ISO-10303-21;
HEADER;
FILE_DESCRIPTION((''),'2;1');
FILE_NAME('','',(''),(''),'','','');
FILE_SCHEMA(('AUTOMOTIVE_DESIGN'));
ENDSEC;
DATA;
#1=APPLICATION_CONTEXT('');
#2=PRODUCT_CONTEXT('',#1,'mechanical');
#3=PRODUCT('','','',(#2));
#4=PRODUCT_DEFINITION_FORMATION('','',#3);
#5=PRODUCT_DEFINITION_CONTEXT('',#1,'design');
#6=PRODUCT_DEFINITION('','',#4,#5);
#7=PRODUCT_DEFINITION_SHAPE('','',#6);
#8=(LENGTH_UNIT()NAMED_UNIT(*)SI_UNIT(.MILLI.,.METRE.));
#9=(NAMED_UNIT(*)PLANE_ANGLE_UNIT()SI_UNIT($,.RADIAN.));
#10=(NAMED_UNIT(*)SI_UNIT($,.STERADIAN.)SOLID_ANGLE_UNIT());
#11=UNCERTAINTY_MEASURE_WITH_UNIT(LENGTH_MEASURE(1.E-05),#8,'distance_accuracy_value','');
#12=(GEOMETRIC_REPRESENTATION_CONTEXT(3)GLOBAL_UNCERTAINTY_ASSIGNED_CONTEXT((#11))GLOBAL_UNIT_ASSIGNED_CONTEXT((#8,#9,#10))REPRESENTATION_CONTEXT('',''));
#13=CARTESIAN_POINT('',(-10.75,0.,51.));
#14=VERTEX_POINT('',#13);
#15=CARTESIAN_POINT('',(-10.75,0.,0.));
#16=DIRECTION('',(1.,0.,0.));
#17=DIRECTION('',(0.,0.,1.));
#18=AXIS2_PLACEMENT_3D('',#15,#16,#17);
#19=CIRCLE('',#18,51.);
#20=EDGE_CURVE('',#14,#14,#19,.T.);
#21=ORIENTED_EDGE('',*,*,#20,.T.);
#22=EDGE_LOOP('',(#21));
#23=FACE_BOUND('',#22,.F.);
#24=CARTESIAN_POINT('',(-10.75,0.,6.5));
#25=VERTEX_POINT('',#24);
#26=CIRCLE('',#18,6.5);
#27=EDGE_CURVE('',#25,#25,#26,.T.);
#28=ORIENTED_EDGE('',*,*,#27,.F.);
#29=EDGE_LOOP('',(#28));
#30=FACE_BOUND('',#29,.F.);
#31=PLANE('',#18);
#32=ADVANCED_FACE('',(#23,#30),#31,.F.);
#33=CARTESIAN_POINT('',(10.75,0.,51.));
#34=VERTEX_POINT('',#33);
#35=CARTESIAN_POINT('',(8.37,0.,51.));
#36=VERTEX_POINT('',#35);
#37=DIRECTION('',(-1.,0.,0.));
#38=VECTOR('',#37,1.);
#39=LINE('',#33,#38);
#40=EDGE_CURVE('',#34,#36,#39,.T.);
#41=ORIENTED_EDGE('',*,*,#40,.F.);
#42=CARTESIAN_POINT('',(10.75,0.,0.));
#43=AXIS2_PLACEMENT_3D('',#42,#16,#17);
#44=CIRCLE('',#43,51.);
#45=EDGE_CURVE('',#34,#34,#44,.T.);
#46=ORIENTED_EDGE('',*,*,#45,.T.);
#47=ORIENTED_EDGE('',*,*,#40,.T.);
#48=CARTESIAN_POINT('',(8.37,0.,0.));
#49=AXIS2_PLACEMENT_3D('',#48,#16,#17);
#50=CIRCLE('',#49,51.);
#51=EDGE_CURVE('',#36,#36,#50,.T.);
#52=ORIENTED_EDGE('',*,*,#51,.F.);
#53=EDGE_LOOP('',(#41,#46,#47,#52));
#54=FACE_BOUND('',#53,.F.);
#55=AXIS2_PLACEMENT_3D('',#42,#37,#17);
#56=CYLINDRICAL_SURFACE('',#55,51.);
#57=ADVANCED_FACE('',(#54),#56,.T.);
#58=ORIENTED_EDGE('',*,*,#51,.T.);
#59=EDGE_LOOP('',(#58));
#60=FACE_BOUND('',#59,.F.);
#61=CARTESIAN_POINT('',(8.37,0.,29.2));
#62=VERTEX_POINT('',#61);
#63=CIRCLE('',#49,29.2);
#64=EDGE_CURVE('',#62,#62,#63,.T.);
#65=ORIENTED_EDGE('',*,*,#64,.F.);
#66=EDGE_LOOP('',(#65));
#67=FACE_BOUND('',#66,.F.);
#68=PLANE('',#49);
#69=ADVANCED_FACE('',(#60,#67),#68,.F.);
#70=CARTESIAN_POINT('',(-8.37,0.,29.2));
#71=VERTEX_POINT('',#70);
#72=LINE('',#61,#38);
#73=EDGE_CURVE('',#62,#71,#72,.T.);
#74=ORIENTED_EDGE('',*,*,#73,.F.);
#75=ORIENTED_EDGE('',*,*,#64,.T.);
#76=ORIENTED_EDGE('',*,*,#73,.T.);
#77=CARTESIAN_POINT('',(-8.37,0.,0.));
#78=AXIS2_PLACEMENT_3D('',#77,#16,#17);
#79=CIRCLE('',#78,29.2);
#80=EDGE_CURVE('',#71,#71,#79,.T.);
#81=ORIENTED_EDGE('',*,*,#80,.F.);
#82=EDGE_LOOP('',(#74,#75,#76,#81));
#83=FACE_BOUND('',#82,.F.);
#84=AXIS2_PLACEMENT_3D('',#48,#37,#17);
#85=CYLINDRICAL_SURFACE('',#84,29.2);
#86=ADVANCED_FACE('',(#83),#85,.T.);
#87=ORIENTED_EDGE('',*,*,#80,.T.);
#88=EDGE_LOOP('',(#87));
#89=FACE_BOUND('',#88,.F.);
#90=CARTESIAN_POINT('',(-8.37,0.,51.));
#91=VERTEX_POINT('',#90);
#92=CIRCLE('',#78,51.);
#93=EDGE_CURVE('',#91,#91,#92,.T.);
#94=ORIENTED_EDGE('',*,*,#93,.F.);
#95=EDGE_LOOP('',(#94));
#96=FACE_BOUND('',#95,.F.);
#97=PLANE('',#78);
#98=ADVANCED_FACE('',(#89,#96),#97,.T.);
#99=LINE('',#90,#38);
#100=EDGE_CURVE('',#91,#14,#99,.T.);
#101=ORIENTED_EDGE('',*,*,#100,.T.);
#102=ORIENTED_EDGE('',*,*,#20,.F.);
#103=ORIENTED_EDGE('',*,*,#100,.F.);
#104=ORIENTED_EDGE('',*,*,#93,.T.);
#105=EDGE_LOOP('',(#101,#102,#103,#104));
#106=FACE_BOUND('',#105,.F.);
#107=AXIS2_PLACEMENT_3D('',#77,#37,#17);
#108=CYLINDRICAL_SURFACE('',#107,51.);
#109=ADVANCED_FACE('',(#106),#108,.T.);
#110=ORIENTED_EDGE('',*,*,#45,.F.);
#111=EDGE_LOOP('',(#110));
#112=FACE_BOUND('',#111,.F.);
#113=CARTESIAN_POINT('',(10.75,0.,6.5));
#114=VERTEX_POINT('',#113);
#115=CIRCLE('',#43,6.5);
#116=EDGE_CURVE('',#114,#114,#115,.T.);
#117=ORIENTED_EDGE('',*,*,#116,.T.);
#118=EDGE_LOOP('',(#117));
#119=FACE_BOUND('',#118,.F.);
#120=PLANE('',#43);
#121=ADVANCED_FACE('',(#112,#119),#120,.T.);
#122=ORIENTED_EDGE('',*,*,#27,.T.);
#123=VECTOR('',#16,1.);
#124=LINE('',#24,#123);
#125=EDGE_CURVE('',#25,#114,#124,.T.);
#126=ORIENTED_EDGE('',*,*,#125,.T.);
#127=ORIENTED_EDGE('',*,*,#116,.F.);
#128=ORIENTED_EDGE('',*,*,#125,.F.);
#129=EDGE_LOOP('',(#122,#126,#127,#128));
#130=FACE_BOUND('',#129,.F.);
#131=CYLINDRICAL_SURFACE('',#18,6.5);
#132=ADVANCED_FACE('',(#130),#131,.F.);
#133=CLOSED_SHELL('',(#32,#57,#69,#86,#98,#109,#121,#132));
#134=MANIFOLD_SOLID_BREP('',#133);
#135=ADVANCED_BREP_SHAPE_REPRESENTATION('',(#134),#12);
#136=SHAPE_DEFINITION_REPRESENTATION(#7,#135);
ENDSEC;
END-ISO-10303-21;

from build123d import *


# Not quite as in the source:
# - the program builds the solid bodies; features that only make, move or delete a surface that nothing else refers to are left out


with BuildPart() as f1:
    # F0 (on Front) → F1 (revolve)
    with BuildSketch(Plane.XZ):
        Polygon((-10.75, 51), (-10.75, 6.5), (0, 6.5), (10.75, 6.5), (10.75, 51), (8.37, 51), (8.37, 29.2), (0, 29.2), (-8.37, 29.2), (-8.37, 51), align=None)
    revolve(axis=Axis((1.0461220518, 0, 0), (1, 0, 0)))


solid = f1.part
